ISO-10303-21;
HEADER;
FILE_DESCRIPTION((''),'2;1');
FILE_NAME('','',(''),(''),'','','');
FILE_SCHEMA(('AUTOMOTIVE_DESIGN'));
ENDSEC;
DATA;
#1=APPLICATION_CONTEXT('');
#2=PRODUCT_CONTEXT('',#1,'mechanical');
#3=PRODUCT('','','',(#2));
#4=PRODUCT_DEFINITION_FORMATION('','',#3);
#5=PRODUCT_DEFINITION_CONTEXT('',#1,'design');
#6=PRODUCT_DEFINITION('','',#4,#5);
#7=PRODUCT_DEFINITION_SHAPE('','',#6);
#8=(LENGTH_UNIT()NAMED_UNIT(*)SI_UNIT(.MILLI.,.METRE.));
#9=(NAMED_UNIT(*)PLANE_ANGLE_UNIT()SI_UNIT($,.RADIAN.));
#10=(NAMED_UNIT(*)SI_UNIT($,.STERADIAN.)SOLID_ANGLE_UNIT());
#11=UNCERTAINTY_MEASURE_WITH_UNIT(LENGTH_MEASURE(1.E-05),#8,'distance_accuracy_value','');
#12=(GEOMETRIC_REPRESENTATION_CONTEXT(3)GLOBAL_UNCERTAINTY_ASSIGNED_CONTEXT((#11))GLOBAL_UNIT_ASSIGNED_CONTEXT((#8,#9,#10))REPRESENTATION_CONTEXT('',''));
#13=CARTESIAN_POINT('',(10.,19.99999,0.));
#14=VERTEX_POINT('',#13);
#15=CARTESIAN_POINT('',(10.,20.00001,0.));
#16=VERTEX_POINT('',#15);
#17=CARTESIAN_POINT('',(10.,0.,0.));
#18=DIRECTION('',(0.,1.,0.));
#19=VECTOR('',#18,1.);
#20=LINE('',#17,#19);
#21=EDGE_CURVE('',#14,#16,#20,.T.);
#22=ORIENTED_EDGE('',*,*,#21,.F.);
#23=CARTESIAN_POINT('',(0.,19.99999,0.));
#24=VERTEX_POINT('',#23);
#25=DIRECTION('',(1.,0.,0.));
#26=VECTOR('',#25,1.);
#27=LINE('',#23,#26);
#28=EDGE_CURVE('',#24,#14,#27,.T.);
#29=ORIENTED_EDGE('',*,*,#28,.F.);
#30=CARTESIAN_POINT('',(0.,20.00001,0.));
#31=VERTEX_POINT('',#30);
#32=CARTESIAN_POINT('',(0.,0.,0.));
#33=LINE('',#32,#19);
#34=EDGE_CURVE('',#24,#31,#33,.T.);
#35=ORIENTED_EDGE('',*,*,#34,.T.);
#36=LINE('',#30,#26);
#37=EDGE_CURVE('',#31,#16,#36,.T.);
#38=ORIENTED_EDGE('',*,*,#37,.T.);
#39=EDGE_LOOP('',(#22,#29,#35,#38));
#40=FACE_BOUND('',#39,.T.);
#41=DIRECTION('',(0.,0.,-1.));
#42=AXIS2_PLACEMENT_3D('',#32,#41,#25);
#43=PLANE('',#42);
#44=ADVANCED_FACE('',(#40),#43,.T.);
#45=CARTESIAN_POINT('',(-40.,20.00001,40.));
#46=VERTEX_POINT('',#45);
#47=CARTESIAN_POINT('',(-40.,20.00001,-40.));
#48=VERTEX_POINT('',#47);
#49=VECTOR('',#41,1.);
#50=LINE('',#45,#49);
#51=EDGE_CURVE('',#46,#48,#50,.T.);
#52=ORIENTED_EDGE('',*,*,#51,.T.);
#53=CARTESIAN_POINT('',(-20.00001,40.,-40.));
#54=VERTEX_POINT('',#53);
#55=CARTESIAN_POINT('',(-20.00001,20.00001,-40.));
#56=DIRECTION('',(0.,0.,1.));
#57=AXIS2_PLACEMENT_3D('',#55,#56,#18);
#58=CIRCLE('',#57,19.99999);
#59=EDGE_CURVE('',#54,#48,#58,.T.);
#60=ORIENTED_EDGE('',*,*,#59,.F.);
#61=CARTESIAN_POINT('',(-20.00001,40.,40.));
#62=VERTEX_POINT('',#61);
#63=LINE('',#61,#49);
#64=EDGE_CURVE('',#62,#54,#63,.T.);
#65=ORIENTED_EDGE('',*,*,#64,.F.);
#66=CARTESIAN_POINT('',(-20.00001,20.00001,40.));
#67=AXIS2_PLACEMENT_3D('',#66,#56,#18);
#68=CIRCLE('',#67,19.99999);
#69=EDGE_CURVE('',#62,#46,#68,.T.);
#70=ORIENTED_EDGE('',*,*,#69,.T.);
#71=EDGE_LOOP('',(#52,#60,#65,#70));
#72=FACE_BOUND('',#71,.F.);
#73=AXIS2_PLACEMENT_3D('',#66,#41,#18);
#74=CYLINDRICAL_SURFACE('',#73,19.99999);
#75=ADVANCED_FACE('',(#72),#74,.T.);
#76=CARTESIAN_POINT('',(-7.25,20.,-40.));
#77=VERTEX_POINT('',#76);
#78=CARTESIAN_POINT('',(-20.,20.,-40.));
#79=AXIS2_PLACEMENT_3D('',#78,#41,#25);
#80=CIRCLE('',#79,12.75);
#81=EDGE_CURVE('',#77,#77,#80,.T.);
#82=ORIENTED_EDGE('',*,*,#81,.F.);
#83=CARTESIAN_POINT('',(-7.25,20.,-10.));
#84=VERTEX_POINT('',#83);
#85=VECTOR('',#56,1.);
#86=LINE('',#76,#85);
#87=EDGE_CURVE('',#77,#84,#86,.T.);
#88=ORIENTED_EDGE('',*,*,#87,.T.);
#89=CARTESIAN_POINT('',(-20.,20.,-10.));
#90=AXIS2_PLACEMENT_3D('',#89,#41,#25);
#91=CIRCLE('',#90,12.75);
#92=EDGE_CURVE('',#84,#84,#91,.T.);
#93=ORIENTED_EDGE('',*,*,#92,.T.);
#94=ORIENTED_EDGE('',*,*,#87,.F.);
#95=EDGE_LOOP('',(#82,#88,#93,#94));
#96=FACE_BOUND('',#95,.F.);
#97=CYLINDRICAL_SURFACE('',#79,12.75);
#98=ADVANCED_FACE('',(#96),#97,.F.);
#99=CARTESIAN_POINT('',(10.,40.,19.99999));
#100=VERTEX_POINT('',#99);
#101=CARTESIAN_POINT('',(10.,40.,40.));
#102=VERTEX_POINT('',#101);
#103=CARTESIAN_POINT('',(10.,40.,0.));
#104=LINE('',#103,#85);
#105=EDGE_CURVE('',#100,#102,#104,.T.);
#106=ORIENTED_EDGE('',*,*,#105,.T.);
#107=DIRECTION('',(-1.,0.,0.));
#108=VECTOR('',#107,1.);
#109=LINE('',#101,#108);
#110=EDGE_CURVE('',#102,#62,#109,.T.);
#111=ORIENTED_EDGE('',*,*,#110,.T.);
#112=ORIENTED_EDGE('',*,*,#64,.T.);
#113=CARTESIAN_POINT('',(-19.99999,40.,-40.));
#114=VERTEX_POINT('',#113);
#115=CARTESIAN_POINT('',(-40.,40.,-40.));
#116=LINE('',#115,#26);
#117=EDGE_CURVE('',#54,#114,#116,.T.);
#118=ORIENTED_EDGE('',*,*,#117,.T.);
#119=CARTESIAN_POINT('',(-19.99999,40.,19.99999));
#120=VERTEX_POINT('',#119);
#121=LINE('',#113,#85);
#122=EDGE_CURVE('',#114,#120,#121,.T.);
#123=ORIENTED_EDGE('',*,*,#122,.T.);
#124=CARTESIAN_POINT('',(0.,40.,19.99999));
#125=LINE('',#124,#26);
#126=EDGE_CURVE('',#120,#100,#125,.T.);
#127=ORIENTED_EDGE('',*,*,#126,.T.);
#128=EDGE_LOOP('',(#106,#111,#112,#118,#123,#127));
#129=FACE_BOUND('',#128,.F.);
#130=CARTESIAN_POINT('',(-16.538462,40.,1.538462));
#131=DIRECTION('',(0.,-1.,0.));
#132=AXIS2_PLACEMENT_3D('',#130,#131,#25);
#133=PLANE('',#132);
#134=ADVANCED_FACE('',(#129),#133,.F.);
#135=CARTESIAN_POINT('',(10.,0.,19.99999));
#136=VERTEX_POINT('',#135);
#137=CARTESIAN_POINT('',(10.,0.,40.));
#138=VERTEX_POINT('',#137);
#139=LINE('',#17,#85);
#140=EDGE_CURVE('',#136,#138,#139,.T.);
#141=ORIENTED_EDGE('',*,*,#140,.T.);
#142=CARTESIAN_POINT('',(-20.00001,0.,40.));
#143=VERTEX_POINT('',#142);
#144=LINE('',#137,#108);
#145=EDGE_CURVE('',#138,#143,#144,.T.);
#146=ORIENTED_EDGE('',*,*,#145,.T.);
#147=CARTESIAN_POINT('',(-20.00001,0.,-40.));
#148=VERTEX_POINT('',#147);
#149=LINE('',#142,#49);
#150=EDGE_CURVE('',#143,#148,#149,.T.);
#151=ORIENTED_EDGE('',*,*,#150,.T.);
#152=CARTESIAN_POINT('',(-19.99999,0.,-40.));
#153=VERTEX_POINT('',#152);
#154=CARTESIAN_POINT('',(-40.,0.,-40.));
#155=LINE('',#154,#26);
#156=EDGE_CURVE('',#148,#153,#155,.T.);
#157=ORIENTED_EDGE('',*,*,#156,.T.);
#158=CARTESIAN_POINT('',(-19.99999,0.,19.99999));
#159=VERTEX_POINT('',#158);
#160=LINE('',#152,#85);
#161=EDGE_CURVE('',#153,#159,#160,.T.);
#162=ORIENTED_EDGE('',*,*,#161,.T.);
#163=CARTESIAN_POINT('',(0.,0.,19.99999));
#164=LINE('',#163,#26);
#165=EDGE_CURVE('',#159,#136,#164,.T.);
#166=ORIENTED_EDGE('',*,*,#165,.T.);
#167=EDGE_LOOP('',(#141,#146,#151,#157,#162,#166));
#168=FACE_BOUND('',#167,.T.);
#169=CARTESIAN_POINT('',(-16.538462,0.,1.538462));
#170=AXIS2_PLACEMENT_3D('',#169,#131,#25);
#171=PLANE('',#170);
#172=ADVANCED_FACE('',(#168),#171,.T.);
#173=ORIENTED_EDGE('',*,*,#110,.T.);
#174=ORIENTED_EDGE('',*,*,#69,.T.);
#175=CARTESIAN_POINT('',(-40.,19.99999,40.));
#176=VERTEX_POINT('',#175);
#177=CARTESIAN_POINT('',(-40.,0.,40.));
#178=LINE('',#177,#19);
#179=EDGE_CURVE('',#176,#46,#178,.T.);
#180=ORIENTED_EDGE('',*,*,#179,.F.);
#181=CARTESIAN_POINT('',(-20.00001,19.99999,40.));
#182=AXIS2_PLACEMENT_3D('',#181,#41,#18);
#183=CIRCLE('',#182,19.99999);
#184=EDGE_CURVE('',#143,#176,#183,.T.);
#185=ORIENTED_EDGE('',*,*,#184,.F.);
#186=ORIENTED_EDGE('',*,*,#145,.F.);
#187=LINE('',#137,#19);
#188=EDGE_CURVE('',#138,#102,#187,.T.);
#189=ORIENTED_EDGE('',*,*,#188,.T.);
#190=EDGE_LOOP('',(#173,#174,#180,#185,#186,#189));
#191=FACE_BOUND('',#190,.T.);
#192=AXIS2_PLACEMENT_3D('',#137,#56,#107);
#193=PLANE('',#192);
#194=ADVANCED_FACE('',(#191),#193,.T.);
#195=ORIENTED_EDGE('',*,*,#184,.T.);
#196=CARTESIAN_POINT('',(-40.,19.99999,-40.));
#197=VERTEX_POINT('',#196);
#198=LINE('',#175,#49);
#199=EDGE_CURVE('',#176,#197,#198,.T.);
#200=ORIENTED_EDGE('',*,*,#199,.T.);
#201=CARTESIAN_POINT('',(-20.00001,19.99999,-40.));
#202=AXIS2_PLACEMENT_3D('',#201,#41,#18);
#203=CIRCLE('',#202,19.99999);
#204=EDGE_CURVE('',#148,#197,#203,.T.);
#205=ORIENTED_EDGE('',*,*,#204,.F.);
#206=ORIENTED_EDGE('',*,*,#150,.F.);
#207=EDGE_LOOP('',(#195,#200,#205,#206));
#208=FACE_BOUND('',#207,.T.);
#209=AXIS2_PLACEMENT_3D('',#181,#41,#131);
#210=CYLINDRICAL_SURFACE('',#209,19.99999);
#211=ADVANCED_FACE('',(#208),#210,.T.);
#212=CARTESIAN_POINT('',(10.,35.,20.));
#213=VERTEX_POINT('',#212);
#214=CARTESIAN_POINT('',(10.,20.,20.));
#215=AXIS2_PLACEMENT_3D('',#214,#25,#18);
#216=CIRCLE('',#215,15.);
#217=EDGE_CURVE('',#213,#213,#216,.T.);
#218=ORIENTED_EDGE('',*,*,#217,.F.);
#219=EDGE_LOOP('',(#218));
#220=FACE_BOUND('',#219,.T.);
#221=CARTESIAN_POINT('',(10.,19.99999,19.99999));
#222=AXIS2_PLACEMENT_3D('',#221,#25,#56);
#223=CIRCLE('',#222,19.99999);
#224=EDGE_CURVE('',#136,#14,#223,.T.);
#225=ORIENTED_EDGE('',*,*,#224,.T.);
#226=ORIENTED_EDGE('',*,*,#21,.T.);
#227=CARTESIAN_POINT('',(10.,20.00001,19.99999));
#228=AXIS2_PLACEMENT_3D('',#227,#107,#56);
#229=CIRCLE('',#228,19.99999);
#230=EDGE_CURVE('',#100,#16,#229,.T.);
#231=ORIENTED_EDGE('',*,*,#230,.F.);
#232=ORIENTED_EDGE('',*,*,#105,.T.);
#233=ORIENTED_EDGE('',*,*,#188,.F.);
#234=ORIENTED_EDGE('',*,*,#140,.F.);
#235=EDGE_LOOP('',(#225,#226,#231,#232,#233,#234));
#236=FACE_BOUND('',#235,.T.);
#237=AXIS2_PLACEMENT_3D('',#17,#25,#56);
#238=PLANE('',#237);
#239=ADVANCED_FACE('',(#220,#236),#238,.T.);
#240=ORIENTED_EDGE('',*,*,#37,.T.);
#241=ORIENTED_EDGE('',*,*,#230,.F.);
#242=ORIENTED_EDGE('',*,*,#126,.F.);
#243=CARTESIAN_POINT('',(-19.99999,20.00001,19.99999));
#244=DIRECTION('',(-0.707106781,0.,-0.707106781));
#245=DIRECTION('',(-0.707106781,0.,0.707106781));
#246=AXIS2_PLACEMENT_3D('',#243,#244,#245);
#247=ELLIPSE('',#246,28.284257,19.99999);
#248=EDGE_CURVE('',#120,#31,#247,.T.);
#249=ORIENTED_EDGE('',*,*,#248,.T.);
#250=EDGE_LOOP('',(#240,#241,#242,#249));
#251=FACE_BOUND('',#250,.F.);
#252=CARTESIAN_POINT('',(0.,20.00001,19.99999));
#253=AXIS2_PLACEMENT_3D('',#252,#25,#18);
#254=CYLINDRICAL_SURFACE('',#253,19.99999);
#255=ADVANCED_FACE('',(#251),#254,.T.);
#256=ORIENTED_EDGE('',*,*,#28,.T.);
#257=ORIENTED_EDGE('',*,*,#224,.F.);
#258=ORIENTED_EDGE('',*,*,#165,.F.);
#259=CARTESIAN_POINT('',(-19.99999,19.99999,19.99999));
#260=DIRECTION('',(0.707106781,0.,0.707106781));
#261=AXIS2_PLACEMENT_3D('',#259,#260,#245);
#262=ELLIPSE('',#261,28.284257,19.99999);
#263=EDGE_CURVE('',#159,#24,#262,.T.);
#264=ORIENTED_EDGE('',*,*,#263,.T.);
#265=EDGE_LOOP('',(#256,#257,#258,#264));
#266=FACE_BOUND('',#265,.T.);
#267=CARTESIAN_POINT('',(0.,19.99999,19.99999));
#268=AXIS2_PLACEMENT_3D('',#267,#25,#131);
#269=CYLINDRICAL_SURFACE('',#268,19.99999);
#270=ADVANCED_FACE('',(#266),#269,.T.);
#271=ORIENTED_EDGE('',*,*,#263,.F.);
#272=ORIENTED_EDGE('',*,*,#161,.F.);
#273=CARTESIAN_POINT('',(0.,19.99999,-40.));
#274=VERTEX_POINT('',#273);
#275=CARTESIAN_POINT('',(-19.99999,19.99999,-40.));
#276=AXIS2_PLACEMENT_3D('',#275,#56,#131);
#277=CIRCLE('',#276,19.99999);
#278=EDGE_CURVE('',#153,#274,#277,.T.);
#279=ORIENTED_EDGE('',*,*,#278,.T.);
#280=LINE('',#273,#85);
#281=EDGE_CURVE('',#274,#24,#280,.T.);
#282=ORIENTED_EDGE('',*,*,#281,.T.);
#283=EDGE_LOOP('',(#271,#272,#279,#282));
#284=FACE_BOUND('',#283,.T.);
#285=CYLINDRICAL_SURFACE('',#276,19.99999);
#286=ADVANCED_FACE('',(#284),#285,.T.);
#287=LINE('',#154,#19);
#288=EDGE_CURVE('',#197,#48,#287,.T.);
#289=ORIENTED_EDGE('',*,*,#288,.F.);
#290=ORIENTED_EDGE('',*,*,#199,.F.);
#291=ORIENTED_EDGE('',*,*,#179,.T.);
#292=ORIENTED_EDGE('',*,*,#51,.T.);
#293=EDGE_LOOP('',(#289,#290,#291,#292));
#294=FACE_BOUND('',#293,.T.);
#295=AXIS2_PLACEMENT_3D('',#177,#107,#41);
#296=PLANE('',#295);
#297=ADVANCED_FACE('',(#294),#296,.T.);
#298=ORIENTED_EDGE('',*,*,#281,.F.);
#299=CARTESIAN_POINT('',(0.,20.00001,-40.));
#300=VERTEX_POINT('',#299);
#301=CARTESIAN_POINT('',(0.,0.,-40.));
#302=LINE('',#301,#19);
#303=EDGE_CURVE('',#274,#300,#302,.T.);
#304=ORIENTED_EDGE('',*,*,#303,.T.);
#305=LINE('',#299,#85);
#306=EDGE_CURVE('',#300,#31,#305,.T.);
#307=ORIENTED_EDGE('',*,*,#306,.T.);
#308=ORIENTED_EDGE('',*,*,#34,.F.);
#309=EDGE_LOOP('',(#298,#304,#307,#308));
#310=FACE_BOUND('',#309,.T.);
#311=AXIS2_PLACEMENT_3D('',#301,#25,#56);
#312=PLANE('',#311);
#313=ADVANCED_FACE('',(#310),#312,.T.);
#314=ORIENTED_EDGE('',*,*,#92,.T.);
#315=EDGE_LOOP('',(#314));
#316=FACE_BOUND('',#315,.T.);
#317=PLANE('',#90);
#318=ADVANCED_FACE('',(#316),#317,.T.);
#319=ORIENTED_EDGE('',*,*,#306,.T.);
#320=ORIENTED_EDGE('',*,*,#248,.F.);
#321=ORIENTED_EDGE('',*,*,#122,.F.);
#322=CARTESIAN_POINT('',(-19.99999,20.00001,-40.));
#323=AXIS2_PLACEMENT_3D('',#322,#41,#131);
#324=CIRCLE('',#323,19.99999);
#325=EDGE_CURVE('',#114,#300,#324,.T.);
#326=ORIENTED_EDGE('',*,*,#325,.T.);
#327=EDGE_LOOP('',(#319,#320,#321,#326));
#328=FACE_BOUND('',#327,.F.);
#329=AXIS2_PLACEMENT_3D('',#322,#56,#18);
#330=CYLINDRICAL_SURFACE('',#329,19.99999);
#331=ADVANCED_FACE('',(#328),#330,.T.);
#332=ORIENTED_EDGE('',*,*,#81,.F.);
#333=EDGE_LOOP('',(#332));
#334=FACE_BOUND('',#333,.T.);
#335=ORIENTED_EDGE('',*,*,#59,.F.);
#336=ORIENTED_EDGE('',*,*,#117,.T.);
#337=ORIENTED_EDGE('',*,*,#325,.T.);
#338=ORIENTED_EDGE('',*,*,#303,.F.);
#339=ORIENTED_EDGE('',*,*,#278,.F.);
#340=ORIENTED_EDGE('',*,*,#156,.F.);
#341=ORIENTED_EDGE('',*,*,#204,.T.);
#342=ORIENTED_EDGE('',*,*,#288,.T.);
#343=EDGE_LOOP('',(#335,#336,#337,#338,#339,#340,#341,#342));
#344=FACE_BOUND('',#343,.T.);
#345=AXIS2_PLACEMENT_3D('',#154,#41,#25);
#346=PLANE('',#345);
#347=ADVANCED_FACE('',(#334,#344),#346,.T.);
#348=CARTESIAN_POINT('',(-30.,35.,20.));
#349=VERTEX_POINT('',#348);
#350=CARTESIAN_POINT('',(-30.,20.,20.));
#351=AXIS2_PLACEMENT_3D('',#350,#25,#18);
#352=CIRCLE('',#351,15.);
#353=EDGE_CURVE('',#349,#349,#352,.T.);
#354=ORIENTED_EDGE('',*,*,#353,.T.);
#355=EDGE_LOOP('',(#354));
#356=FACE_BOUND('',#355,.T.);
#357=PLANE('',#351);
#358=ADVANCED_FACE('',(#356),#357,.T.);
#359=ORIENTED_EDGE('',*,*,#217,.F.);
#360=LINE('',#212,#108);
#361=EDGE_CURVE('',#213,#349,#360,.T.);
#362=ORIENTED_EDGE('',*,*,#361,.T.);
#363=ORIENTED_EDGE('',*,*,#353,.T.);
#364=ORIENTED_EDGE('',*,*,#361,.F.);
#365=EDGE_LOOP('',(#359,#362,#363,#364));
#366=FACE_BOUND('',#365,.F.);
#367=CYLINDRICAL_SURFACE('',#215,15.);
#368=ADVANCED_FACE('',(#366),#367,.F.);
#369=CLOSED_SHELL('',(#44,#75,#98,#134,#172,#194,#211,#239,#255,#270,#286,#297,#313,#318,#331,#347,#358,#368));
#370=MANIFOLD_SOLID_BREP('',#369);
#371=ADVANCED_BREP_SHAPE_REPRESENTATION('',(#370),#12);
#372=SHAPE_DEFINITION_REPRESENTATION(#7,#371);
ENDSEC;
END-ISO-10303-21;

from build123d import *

# Parameters (mm, degrees)
F1_DEPTH = 40
F2_R     = 15
F3_DEPTH = 40
F4_R     = 12.75
F5_DEPTH = 30
F6_R     = 19.99999
F7_R     = 19.99999


# Not quite as in the source:
# - a fillet or chamfer is up to 0.001 mm smaller than in the source, because OpenCascade refuses the exact size


with BuildPart() as f1:
    # F0 (on Front) → F1 (new body)
    with BuildSketch(Plane.XZ):
        Polygon((0, -40), (0, 0), (10, 0), (10, 40), (-40, 40), (-40, -40), align=None)
    extrude(amount=-F1_DEPTH)

    # F2 (on face) → F3 (cut)
    with BuildSketch(Plane.YZ.offset(10)):
        with Locations((20, 20)):
            Circle(F2_R)
    extrude(amount=-F3_DEPTH, mode=Mode.SUBTRACT)

    # F4 (on face) → F5 (cut)
    with BuildSketch(Plane(origin=(0, 0, -40), x_dir=(1, 0, 0), z_dir=(0, 0, -1))):
        with Locations((-20, -20)):
            Circle(F4_R)
    extrude(amount=-F5_DEPTH, mode=Mode.SUBTRACT)

    # F6 (radius 20 in the source; OpenCascade refuses exactly that, so slightly less here)
    f6_edges = [f1.edges().sort_by_distance(p)[0] for p in [
        (-40, 40, 0),
        (-40, 0, 0),
    ]]
    fillet(f6_edges, radius=F6_R)

    # F7 (radius 20 in the source; OpenCascade refuses exactly that, so slightly less here)
    f7_edges = [f1.edges().sort_by_distance(p)[0] for p in [
        (0, 0, -20),
        (0, 40, -20),
        (5, 0, 0),
        (5, 40, 0),
    ]]
    fillet(f7_edges, radius=F7_R)


solid = f1.part
